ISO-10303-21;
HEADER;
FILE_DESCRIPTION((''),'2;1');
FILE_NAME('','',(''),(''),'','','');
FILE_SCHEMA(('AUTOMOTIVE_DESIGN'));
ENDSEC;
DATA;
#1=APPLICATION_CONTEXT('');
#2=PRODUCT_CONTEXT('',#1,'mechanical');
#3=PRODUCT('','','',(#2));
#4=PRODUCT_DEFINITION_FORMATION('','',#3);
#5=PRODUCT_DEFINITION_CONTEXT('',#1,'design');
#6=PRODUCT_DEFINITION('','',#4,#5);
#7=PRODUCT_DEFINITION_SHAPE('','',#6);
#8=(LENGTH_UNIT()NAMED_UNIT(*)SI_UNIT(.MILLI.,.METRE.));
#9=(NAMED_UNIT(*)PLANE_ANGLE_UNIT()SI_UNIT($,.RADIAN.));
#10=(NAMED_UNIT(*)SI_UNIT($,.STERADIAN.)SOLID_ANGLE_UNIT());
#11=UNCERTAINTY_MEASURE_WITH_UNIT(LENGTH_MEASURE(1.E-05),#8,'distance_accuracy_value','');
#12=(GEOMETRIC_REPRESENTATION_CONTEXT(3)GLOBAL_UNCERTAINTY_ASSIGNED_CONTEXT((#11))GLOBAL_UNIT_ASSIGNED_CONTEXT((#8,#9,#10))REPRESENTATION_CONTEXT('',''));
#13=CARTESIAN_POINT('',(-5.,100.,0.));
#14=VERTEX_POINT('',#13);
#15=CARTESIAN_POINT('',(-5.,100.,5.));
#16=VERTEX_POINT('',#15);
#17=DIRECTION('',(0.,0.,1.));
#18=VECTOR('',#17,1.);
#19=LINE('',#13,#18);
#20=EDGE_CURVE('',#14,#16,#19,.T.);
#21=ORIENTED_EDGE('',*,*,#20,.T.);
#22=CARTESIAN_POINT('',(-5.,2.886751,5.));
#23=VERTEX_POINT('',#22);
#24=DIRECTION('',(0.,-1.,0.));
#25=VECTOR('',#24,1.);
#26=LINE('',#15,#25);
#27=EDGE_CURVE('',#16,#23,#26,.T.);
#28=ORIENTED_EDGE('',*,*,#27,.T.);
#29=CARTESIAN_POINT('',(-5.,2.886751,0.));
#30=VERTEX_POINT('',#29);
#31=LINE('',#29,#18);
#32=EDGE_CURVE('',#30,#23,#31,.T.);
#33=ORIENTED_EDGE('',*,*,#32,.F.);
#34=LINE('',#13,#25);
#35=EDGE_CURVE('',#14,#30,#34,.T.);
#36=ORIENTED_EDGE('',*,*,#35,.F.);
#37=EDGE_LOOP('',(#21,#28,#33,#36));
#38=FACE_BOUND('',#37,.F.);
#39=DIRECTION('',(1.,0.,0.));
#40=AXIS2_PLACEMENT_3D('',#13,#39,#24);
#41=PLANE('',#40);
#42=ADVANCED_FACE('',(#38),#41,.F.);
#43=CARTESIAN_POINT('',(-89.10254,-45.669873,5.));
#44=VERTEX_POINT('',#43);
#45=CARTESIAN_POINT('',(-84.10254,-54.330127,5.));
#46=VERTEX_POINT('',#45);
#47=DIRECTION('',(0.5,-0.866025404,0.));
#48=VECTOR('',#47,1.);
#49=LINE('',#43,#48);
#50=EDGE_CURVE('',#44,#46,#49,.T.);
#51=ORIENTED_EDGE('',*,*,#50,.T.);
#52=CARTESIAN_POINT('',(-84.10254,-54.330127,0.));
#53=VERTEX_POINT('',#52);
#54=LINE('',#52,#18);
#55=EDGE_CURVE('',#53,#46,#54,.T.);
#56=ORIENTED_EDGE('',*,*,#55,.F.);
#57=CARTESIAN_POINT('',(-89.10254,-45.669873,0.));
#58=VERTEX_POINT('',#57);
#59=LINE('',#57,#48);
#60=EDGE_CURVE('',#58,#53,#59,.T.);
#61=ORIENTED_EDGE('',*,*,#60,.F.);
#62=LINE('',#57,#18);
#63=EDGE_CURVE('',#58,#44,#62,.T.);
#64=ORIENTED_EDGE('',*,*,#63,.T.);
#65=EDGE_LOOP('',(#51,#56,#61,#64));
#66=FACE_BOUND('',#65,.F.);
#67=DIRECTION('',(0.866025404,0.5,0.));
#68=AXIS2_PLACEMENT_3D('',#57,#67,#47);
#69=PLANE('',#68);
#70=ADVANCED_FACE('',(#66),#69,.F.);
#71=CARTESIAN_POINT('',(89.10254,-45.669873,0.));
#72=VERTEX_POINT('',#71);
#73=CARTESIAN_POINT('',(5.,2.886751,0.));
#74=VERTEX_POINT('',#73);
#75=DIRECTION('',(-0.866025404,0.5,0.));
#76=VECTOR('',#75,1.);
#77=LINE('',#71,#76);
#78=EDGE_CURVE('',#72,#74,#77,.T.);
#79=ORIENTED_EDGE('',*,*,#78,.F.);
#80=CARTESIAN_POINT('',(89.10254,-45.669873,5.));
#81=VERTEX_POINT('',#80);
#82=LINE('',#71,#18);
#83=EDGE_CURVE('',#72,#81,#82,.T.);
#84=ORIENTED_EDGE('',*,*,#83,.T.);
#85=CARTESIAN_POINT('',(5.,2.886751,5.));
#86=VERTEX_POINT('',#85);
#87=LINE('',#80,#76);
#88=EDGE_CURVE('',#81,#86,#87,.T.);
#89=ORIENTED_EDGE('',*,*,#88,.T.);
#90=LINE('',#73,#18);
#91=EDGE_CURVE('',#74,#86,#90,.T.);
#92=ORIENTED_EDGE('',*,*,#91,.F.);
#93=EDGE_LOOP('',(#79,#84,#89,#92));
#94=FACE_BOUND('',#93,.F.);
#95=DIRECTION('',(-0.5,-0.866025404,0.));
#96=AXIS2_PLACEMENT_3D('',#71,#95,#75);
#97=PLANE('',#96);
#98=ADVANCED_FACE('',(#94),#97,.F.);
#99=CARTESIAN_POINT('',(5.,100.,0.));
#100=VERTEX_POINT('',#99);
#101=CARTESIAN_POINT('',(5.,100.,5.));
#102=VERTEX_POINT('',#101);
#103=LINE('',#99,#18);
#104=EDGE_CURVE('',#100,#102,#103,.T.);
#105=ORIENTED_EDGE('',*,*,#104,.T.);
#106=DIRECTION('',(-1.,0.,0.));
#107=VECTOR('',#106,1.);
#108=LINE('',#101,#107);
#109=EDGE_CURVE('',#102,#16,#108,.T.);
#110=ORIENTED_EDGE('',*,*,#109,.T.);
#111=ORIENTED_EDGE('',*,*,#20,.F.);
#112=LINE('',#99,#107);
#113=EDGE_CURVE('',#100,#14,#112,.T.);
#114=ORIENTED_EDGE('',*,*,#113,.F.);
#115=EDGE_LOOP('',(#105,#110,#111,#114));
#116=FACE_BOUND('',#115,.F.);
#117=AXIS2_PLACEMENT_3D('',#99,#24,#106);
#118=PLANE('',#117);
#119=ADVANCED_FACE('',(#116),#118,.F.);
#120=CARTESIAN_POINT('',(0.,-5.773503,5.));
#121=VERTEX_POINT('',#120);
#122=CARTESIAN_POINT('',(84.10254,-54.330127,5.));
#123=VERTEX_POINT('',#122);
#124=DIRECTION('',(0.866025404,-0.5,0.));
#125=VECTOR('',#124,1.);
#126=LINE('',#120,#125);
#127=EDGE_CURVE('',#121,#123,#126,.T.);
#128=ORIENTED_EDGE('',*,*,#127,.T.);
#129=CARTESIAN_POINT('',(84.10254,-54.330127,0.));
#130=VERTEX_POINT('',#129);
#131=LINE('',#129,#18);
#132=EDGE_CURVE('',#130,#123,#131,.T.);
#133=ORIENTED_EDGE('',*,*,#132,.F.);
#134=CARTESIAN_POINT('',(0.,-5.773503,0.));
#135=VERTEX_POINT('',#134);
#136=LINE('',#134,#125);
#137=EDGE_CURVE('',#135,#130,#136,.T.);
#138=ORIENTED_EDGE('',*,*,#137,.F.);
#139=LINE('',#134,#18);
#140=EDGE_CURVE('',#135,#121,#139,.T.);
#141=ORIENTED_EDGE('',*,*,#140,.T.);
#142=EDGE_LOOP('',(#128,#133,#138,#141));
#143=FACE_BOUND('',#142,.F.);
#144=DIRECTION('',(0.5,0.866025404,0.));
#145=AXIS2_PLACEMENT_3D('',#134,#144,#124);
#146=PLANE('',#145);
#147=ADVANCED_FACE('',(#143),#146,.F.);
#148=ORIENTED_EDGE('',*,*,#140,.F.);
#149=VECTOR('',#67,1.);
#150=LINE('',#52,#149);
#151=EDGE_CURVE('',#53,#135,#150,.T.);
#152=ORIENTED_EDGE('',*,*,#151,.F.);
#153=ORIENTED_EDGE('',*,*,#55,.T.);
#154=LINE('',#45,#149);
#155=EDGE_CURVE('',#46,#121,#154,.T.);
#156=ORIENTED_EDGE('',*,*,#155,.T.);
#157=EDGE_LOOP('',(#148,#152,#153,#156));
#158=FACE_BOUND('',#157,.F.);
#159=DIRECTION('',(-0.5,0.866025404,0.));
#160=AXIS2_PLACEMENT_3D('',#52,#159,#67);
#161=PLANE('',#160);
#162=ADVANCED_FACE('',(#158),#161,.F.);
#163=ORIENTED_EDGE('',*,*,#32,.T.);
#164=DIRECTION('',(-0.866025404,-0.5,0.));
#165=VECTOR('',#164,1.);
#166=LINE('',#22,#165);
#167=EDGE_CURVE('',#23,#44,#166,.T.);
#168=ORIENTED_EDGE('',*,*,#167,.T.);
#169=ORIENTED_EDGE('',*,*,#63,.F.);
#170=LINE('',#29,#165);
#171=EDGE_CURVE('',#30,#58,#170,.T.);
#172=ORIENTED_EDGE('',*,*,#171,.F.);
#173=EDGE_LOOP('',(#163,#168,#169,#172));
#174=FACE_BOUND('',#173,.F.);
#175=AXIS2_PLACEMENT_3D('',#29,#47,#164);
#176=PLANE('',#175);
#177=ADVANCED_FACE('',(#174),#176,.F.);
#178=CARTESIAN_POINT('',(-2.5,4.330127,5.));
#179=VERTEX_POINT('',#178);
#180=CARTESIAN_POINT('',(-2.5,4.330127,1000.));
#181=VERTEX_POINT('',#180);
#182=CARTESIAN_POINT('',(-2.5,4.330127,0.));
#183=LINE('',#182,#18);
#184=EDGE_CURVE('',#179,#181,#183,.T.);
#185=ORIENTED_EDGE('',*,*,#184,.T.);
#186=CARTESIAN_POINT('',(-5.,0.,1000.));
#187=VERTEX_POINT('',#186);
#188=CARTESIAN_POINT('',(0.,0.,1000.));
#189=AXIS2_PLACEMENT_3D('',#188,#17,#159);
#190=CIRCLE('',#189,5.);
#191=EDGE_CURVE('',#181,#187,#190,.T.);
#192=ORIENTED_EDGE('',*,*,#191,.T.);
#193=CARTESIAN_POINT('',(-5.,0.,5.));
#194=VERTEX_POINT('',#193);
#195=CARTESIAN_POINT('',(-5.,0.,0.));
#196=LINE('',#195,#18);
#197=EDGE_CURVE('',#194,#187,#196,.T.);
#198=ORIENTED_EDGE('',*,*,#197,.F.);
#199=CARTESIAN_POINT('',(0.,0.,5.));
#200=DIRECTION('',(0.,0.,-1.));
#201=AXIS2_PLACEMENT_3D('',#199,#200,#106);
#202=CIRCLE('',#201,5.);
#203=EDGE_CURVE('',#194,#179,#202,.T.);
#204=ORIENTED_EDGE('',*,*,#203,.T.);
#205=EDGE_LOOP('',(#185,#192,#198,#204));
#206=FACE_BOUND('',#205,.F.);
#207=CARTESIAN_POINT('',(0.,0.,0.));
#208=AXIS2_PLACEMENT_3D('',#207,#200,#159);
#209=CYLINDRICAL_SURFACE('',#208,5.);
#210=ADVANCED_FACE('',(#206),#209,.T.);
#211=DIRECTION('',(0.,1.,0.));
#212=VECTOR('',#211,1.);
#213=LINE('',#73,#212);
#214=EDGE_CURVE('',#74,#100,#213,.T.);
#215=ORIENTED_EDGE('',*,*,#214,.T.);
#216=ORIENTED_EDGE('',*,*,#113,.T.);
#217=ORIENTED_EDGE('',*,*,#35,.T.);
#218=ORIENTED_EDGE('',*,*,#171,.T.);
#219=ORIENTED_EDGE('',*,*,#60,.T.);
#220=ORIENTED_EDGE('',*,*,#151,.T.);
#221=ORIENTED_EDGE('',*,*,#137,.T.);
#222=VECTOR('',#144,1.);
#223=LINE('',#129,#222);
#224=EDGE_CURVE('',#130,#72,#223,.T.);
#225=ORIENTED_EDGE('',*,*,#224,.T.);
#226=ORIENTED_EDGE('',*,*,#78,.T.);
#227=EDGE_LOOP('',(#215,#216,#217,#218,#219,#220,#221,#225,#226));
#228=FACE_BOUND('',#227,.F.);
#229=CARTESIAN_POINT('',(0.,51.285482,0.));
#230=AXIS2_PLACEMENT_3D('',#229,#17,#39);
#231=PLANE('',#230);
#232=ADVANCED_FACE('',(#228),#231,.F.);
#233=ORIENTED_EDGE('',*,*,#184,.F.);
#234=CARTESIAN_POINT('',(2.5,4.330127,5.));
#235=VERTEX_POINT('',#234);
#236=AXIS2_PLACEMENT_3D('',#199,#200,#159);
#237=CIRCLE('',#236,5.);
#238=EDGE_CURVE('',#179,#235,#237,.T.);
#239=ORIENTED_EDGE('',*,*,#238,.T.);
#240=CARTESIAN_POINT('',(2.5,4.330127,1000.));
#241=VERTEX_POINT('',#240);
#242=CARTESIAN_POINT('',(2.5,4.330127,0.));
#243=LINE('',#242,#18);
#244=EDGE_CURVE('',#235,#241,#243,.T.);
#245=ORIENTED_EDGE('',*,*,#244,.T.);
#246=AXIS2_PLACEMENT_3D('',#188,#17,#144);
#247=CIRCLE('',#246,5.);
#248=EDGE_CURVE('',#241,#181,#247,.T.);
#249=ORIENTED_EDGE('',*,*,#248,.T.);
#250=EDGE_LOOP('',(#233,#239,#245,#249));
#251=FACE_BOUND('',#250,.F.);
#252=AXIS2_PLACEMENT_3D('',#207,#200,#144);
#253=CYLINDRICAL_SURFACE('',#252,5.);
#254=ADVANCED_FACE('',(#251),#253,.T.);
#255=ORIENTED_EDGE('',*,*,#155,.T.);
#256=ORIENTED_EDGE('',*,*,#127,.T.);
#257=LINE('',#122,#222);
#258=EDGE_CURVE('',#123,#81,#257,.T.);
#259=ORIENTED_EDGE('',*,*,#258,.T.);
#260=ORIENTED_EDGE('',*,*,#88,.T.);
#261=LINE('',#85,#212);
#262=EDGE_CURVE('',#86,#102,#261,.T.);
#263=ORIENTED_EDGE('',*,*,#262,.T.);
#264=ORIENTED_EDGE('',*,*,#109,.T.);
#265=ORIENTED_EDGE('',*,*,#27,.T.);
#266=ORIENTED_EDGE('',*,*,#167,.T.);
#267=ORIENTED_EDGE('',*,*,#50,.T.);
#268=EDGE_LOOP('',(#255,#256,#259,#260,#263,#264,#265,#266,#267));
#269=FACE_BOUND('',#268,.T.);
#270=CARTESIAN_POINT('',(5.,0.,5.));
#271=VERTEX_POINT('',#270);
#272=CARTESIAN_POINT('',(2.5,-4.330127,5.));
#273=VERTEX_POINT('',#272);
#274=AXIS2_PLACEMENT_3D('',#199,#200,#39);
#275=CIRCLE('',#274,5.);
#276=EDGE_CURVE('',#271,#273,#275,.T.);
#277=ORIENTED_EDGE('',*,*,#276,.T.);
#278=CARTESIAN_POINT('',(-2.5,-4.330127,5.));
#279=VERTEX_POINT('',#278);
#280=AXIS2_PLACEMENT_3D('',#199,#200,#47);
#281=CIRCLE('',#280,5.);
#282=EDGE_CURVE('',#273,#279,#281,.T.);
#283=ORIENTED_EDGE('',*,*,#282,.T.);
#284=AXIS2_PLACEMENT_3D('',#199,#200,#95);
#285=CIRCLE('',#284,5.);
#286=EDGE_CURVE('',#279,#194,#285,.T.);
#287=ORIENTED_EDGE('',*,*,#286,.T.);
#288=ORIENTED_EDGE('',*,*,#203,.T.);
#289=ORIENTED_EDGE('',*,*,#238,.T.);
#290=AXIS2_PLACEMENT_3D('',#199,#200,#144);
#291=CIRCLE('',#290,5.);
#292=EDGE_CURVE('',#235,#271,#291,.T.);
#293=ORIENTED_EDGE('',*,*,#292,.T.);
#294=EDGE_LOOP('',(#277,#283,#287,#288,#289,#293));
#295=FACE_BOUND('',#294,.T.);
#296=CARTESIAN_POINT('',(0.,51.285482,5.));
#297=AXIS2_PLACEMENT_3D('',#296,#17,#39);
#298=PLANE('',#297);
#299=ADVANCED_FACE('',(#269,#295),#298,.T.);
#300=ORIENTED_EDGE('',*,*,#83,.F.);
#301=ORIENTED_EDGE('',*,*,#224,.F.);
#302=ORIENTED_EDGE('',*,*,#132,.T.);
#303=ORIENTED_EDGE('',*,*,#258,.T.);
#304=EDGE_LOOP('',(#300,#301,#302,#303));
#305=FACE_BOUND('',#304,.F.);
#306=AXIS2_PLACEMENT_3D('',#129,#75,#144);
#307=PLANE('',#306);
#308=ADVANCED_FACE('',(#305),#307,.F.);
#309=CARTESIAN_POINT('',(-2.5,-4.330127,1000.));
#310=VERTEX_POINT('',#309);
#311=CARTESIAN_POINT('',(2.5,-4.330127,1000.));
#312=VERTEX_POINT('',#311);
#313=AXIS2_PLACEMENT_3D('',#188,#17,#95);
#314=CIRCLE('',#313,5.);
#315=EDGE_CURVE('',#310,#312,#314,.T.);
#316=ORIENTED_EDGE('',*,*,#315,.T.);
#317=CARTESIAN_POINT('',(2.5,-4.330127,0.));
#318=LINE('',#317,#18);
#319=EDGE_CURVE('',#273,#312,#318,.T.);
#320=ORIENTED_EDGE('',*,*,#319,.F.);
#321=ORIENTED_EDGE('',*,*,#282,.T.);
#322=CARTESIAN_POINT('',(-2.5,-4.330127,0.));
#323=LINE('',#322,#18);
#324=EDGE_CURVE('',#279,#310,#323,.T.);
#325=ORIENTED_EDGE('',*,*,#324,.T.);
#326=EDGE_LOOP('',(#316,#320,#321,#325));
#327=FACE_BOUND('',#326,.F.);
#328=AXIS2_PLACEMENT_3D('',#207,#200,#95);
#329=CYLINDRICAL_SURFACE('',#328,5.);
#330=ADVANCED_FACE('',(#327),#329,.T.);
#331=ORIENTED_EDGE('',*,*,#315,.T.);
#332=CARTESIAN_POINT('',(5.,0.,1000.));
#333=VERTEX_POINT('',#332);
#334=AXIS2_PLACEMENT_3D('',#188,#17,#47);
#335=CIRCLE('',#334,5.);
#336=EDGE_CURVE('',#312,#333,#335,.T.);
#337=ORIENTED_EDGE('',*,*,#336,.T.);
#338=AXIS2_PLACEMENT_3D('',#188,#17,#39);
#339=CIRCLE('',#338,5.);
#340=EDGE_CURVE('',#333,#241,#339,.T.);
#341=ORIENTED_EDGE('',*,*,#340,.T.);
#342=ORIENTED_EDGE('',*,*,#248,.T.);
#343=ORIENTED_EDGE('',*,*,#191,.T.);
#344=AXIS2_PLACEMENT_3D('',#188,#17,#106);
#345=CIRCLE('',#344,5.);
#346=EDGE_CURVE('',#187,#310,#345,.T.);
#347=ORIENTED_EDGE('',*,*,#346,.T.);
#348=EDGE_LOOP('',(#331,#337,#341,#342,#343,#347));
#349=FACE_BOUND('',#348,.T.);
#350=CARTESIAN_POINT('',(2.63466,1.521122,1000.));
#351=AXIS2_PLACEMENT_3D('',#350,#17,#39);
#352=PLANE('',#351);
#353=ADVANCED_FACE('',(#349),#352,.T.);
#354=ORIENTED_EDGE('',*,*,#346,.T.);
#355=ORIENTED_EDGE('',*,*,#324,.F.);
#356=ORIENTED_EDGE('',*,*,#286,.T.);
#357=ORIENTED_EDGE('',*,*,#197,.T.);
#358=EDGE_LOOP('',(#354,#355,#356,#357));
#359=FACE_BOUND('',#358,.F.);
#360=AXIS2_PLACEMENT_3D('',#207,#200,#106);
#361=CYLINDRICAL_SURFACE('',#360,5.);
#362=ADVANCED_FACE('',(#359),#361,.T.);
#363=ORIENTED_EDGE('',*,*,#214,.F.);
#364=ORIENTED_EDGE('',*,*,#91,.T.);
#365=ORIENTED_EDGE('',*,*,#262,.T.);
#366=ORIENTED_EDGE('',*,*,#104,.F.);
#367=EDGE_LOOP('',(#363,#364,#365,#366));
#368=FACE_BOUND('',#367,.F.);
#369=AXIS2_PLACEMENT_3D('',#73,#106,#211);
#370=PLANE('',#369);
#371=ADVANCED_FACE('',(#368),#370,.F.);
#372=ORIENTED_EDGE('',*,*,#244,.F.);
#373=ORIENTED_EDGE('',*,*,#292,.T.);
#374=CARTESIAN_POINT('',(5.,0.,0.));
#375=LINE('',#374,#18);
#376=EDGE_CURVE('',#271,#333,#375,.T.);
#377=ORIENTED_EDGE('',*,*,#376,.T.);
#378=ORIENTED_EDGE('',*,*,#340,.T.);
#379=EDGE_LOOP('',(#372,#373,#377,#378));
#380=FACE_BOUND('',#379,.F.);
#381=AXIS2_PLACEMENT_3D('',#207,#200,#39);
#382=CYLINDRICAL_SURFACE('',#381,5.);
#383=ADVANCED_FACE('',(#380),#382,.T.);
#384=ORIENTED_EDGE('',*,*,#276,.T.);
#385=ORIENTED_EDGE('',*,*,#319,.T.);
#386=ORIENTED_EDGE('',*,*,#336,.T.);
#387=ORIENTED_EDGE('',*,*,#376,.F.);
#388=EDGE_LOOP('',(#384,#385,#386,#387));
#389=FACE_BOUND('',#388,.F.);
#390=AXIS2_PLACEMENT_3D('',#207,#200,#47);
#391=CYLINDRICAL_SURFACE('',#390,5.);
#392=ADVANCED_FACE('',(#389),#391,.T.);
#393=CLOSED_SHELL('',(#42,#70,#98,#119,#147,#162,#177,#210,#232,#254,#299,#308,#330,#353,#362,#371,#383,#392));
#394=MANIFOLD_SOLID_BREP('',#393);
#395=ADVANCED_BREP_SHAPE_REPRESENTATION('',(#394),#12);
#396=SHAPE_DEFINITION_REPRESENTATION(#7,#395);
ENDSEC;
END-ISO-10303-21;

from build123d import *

# Parameters (mm, degrees)
F1_DEPTH = 5
F2_DEPTH = 1000


with BuildPart() as f1:
    # F0 (on Top) → F1 (new body)
    with BuildSketch(Plane.XY):
        with BuildLine():
            Line((-5, 100), (-5, 2.8867513459))
            Line((-5, 2.8867513459), (-2.5, 4.3301270189))
            ThreePointArc((-2.5, 4.3301270189), (0, 5), (2.5, 4.3301270189))
            Line((2.5, 4.3301270189), (5, 2.8867513459))
            Line((5, 2.8867513459), (5, 100))
            Line((5, 100), (-5, 100))
        make_face()
        with BuildLine():
            Line((-2.5, 4.3301270189), (-5, 2.8867513459))
            Line((-5, 2.8867513459), (-5, 0))
            ThreePointArc((-5, 0), (-4.3301270189, 2.5), (-2.5, 4.3301270189))
        make_face()
        with BuildLine():
            Line((-89.1025403784, -45.6698729811), (-86.6025403784, -50))
            Line((-86.6025403784, -50), (-84.1025403784, -54.3301270189))
            Line((-84.1025403784, -54.3301270189), (0, -5.7735026919))
            Line((0, -5.7735026919), (-2.5, -4.3301270189))
            ThreePointArc((-2.5, -4.3301270189), (-4.3301270189, -2.5), (-5, 0))
            Line((-5, 0), (-5, 2.8867513459))
            Line((-5, 2.8867513459), (-89.1025403784, -45.6698729811))
        make_face()
        with BuildLine():
            Line((-2.5, -4.3301270189), (0, -5.7735026919))
            Line((0, -5.7735026919), (2.5, -4.3301270189))
            ThreePointArc((2.5, -4.3301270189), (0, -5), (-2.5, -4.3301270189))
        make_face()
        with BuildLine():
            Line((2.5, -4.3301270189), (0, -5.7735026919))
            Line((0, -5.7735026919), (84.1025403784, -54.3301270189))
            Line((84.1025403784, -54.3301270189), (86.6025403784, -50))
            Line((86.6025403784, -50), (89.1025403784, -45.6698729811))
            Line((89.1025403784, -45.6698729811), (5, 2.8867513459))
            Line((5, 2.8867513459), (5, 0))
            ThreePointArc((5, 0), (4.3301270189, -2.5), (2.5, -4.3301270189))
        make_face()
        with BuildLine():
            Line((5, 2.8867513459), (2.5, 4.3301270189))
            ThreePointArc((2.5, 4.3301270189), (4.3301270189, 2.5), (5, 0))
            Line((5, 0), (5, 2.8867513459))
        make_face()
    extrude(amount=F1_DEPTH)

    # F0 (on Top) → F2 (join)
    with BuildSketch(Plane.XY):
        with BuildLine():
            Line((2.5, 4.3301270189), (0, 0))
            Line((0, 0), (5, 0))
            ThreePointArc((5, 0), (4.3301270189, 2.5), (2.5, 4.3301270189))
        make_face()
        with BuildLine():
            Line((0, 0), (2.5, -4.3301270189))
            ThreePointArc((2.5, -4.3301270189), (4.3301270189, -2.5), (5, 0))
            Line((5, 0), (0, 0))
        make_face()
        with BuildLine():
            ThreePointArc((-2.5, -4.3301270189), (0, -5), (2.5, -4.3301270189))
            Line((2.5, -4.3301270189), (0, 0))
            Line((0, 0), (-2.5, -4.3301270189))
        make_face()
        with BuildLine():
            Line((0, 0), (-5, 0))
            ThreePointArc((-5, 0), (-4.3301270189, -2.5), (-2.5, -4.3301270189))
            Line((-2.5, -4.3301270189), (0, 0))
        make_face()
        with BuildLine():
            Line((0, 0), (-2.5, 4.3301270189))
            ThreePointArc((-2.5, 4.3301270189), (-4.3301270189, 2.5), (-5, 0))
            Line((-5, 0), (0, 0))
        make_face()
        with BuildLine():
            ThreePointArc((2.5, 4.3301270189), (0, 5), (-2.5, 4.3301270189))
            Line((-2.5, 4.3301270189), (0, 0))
            Line((0, 0), (2.5, 4.3301270189))
        make_face()
    extrude(amount=F2_DEPTH)


solid = f1.part
